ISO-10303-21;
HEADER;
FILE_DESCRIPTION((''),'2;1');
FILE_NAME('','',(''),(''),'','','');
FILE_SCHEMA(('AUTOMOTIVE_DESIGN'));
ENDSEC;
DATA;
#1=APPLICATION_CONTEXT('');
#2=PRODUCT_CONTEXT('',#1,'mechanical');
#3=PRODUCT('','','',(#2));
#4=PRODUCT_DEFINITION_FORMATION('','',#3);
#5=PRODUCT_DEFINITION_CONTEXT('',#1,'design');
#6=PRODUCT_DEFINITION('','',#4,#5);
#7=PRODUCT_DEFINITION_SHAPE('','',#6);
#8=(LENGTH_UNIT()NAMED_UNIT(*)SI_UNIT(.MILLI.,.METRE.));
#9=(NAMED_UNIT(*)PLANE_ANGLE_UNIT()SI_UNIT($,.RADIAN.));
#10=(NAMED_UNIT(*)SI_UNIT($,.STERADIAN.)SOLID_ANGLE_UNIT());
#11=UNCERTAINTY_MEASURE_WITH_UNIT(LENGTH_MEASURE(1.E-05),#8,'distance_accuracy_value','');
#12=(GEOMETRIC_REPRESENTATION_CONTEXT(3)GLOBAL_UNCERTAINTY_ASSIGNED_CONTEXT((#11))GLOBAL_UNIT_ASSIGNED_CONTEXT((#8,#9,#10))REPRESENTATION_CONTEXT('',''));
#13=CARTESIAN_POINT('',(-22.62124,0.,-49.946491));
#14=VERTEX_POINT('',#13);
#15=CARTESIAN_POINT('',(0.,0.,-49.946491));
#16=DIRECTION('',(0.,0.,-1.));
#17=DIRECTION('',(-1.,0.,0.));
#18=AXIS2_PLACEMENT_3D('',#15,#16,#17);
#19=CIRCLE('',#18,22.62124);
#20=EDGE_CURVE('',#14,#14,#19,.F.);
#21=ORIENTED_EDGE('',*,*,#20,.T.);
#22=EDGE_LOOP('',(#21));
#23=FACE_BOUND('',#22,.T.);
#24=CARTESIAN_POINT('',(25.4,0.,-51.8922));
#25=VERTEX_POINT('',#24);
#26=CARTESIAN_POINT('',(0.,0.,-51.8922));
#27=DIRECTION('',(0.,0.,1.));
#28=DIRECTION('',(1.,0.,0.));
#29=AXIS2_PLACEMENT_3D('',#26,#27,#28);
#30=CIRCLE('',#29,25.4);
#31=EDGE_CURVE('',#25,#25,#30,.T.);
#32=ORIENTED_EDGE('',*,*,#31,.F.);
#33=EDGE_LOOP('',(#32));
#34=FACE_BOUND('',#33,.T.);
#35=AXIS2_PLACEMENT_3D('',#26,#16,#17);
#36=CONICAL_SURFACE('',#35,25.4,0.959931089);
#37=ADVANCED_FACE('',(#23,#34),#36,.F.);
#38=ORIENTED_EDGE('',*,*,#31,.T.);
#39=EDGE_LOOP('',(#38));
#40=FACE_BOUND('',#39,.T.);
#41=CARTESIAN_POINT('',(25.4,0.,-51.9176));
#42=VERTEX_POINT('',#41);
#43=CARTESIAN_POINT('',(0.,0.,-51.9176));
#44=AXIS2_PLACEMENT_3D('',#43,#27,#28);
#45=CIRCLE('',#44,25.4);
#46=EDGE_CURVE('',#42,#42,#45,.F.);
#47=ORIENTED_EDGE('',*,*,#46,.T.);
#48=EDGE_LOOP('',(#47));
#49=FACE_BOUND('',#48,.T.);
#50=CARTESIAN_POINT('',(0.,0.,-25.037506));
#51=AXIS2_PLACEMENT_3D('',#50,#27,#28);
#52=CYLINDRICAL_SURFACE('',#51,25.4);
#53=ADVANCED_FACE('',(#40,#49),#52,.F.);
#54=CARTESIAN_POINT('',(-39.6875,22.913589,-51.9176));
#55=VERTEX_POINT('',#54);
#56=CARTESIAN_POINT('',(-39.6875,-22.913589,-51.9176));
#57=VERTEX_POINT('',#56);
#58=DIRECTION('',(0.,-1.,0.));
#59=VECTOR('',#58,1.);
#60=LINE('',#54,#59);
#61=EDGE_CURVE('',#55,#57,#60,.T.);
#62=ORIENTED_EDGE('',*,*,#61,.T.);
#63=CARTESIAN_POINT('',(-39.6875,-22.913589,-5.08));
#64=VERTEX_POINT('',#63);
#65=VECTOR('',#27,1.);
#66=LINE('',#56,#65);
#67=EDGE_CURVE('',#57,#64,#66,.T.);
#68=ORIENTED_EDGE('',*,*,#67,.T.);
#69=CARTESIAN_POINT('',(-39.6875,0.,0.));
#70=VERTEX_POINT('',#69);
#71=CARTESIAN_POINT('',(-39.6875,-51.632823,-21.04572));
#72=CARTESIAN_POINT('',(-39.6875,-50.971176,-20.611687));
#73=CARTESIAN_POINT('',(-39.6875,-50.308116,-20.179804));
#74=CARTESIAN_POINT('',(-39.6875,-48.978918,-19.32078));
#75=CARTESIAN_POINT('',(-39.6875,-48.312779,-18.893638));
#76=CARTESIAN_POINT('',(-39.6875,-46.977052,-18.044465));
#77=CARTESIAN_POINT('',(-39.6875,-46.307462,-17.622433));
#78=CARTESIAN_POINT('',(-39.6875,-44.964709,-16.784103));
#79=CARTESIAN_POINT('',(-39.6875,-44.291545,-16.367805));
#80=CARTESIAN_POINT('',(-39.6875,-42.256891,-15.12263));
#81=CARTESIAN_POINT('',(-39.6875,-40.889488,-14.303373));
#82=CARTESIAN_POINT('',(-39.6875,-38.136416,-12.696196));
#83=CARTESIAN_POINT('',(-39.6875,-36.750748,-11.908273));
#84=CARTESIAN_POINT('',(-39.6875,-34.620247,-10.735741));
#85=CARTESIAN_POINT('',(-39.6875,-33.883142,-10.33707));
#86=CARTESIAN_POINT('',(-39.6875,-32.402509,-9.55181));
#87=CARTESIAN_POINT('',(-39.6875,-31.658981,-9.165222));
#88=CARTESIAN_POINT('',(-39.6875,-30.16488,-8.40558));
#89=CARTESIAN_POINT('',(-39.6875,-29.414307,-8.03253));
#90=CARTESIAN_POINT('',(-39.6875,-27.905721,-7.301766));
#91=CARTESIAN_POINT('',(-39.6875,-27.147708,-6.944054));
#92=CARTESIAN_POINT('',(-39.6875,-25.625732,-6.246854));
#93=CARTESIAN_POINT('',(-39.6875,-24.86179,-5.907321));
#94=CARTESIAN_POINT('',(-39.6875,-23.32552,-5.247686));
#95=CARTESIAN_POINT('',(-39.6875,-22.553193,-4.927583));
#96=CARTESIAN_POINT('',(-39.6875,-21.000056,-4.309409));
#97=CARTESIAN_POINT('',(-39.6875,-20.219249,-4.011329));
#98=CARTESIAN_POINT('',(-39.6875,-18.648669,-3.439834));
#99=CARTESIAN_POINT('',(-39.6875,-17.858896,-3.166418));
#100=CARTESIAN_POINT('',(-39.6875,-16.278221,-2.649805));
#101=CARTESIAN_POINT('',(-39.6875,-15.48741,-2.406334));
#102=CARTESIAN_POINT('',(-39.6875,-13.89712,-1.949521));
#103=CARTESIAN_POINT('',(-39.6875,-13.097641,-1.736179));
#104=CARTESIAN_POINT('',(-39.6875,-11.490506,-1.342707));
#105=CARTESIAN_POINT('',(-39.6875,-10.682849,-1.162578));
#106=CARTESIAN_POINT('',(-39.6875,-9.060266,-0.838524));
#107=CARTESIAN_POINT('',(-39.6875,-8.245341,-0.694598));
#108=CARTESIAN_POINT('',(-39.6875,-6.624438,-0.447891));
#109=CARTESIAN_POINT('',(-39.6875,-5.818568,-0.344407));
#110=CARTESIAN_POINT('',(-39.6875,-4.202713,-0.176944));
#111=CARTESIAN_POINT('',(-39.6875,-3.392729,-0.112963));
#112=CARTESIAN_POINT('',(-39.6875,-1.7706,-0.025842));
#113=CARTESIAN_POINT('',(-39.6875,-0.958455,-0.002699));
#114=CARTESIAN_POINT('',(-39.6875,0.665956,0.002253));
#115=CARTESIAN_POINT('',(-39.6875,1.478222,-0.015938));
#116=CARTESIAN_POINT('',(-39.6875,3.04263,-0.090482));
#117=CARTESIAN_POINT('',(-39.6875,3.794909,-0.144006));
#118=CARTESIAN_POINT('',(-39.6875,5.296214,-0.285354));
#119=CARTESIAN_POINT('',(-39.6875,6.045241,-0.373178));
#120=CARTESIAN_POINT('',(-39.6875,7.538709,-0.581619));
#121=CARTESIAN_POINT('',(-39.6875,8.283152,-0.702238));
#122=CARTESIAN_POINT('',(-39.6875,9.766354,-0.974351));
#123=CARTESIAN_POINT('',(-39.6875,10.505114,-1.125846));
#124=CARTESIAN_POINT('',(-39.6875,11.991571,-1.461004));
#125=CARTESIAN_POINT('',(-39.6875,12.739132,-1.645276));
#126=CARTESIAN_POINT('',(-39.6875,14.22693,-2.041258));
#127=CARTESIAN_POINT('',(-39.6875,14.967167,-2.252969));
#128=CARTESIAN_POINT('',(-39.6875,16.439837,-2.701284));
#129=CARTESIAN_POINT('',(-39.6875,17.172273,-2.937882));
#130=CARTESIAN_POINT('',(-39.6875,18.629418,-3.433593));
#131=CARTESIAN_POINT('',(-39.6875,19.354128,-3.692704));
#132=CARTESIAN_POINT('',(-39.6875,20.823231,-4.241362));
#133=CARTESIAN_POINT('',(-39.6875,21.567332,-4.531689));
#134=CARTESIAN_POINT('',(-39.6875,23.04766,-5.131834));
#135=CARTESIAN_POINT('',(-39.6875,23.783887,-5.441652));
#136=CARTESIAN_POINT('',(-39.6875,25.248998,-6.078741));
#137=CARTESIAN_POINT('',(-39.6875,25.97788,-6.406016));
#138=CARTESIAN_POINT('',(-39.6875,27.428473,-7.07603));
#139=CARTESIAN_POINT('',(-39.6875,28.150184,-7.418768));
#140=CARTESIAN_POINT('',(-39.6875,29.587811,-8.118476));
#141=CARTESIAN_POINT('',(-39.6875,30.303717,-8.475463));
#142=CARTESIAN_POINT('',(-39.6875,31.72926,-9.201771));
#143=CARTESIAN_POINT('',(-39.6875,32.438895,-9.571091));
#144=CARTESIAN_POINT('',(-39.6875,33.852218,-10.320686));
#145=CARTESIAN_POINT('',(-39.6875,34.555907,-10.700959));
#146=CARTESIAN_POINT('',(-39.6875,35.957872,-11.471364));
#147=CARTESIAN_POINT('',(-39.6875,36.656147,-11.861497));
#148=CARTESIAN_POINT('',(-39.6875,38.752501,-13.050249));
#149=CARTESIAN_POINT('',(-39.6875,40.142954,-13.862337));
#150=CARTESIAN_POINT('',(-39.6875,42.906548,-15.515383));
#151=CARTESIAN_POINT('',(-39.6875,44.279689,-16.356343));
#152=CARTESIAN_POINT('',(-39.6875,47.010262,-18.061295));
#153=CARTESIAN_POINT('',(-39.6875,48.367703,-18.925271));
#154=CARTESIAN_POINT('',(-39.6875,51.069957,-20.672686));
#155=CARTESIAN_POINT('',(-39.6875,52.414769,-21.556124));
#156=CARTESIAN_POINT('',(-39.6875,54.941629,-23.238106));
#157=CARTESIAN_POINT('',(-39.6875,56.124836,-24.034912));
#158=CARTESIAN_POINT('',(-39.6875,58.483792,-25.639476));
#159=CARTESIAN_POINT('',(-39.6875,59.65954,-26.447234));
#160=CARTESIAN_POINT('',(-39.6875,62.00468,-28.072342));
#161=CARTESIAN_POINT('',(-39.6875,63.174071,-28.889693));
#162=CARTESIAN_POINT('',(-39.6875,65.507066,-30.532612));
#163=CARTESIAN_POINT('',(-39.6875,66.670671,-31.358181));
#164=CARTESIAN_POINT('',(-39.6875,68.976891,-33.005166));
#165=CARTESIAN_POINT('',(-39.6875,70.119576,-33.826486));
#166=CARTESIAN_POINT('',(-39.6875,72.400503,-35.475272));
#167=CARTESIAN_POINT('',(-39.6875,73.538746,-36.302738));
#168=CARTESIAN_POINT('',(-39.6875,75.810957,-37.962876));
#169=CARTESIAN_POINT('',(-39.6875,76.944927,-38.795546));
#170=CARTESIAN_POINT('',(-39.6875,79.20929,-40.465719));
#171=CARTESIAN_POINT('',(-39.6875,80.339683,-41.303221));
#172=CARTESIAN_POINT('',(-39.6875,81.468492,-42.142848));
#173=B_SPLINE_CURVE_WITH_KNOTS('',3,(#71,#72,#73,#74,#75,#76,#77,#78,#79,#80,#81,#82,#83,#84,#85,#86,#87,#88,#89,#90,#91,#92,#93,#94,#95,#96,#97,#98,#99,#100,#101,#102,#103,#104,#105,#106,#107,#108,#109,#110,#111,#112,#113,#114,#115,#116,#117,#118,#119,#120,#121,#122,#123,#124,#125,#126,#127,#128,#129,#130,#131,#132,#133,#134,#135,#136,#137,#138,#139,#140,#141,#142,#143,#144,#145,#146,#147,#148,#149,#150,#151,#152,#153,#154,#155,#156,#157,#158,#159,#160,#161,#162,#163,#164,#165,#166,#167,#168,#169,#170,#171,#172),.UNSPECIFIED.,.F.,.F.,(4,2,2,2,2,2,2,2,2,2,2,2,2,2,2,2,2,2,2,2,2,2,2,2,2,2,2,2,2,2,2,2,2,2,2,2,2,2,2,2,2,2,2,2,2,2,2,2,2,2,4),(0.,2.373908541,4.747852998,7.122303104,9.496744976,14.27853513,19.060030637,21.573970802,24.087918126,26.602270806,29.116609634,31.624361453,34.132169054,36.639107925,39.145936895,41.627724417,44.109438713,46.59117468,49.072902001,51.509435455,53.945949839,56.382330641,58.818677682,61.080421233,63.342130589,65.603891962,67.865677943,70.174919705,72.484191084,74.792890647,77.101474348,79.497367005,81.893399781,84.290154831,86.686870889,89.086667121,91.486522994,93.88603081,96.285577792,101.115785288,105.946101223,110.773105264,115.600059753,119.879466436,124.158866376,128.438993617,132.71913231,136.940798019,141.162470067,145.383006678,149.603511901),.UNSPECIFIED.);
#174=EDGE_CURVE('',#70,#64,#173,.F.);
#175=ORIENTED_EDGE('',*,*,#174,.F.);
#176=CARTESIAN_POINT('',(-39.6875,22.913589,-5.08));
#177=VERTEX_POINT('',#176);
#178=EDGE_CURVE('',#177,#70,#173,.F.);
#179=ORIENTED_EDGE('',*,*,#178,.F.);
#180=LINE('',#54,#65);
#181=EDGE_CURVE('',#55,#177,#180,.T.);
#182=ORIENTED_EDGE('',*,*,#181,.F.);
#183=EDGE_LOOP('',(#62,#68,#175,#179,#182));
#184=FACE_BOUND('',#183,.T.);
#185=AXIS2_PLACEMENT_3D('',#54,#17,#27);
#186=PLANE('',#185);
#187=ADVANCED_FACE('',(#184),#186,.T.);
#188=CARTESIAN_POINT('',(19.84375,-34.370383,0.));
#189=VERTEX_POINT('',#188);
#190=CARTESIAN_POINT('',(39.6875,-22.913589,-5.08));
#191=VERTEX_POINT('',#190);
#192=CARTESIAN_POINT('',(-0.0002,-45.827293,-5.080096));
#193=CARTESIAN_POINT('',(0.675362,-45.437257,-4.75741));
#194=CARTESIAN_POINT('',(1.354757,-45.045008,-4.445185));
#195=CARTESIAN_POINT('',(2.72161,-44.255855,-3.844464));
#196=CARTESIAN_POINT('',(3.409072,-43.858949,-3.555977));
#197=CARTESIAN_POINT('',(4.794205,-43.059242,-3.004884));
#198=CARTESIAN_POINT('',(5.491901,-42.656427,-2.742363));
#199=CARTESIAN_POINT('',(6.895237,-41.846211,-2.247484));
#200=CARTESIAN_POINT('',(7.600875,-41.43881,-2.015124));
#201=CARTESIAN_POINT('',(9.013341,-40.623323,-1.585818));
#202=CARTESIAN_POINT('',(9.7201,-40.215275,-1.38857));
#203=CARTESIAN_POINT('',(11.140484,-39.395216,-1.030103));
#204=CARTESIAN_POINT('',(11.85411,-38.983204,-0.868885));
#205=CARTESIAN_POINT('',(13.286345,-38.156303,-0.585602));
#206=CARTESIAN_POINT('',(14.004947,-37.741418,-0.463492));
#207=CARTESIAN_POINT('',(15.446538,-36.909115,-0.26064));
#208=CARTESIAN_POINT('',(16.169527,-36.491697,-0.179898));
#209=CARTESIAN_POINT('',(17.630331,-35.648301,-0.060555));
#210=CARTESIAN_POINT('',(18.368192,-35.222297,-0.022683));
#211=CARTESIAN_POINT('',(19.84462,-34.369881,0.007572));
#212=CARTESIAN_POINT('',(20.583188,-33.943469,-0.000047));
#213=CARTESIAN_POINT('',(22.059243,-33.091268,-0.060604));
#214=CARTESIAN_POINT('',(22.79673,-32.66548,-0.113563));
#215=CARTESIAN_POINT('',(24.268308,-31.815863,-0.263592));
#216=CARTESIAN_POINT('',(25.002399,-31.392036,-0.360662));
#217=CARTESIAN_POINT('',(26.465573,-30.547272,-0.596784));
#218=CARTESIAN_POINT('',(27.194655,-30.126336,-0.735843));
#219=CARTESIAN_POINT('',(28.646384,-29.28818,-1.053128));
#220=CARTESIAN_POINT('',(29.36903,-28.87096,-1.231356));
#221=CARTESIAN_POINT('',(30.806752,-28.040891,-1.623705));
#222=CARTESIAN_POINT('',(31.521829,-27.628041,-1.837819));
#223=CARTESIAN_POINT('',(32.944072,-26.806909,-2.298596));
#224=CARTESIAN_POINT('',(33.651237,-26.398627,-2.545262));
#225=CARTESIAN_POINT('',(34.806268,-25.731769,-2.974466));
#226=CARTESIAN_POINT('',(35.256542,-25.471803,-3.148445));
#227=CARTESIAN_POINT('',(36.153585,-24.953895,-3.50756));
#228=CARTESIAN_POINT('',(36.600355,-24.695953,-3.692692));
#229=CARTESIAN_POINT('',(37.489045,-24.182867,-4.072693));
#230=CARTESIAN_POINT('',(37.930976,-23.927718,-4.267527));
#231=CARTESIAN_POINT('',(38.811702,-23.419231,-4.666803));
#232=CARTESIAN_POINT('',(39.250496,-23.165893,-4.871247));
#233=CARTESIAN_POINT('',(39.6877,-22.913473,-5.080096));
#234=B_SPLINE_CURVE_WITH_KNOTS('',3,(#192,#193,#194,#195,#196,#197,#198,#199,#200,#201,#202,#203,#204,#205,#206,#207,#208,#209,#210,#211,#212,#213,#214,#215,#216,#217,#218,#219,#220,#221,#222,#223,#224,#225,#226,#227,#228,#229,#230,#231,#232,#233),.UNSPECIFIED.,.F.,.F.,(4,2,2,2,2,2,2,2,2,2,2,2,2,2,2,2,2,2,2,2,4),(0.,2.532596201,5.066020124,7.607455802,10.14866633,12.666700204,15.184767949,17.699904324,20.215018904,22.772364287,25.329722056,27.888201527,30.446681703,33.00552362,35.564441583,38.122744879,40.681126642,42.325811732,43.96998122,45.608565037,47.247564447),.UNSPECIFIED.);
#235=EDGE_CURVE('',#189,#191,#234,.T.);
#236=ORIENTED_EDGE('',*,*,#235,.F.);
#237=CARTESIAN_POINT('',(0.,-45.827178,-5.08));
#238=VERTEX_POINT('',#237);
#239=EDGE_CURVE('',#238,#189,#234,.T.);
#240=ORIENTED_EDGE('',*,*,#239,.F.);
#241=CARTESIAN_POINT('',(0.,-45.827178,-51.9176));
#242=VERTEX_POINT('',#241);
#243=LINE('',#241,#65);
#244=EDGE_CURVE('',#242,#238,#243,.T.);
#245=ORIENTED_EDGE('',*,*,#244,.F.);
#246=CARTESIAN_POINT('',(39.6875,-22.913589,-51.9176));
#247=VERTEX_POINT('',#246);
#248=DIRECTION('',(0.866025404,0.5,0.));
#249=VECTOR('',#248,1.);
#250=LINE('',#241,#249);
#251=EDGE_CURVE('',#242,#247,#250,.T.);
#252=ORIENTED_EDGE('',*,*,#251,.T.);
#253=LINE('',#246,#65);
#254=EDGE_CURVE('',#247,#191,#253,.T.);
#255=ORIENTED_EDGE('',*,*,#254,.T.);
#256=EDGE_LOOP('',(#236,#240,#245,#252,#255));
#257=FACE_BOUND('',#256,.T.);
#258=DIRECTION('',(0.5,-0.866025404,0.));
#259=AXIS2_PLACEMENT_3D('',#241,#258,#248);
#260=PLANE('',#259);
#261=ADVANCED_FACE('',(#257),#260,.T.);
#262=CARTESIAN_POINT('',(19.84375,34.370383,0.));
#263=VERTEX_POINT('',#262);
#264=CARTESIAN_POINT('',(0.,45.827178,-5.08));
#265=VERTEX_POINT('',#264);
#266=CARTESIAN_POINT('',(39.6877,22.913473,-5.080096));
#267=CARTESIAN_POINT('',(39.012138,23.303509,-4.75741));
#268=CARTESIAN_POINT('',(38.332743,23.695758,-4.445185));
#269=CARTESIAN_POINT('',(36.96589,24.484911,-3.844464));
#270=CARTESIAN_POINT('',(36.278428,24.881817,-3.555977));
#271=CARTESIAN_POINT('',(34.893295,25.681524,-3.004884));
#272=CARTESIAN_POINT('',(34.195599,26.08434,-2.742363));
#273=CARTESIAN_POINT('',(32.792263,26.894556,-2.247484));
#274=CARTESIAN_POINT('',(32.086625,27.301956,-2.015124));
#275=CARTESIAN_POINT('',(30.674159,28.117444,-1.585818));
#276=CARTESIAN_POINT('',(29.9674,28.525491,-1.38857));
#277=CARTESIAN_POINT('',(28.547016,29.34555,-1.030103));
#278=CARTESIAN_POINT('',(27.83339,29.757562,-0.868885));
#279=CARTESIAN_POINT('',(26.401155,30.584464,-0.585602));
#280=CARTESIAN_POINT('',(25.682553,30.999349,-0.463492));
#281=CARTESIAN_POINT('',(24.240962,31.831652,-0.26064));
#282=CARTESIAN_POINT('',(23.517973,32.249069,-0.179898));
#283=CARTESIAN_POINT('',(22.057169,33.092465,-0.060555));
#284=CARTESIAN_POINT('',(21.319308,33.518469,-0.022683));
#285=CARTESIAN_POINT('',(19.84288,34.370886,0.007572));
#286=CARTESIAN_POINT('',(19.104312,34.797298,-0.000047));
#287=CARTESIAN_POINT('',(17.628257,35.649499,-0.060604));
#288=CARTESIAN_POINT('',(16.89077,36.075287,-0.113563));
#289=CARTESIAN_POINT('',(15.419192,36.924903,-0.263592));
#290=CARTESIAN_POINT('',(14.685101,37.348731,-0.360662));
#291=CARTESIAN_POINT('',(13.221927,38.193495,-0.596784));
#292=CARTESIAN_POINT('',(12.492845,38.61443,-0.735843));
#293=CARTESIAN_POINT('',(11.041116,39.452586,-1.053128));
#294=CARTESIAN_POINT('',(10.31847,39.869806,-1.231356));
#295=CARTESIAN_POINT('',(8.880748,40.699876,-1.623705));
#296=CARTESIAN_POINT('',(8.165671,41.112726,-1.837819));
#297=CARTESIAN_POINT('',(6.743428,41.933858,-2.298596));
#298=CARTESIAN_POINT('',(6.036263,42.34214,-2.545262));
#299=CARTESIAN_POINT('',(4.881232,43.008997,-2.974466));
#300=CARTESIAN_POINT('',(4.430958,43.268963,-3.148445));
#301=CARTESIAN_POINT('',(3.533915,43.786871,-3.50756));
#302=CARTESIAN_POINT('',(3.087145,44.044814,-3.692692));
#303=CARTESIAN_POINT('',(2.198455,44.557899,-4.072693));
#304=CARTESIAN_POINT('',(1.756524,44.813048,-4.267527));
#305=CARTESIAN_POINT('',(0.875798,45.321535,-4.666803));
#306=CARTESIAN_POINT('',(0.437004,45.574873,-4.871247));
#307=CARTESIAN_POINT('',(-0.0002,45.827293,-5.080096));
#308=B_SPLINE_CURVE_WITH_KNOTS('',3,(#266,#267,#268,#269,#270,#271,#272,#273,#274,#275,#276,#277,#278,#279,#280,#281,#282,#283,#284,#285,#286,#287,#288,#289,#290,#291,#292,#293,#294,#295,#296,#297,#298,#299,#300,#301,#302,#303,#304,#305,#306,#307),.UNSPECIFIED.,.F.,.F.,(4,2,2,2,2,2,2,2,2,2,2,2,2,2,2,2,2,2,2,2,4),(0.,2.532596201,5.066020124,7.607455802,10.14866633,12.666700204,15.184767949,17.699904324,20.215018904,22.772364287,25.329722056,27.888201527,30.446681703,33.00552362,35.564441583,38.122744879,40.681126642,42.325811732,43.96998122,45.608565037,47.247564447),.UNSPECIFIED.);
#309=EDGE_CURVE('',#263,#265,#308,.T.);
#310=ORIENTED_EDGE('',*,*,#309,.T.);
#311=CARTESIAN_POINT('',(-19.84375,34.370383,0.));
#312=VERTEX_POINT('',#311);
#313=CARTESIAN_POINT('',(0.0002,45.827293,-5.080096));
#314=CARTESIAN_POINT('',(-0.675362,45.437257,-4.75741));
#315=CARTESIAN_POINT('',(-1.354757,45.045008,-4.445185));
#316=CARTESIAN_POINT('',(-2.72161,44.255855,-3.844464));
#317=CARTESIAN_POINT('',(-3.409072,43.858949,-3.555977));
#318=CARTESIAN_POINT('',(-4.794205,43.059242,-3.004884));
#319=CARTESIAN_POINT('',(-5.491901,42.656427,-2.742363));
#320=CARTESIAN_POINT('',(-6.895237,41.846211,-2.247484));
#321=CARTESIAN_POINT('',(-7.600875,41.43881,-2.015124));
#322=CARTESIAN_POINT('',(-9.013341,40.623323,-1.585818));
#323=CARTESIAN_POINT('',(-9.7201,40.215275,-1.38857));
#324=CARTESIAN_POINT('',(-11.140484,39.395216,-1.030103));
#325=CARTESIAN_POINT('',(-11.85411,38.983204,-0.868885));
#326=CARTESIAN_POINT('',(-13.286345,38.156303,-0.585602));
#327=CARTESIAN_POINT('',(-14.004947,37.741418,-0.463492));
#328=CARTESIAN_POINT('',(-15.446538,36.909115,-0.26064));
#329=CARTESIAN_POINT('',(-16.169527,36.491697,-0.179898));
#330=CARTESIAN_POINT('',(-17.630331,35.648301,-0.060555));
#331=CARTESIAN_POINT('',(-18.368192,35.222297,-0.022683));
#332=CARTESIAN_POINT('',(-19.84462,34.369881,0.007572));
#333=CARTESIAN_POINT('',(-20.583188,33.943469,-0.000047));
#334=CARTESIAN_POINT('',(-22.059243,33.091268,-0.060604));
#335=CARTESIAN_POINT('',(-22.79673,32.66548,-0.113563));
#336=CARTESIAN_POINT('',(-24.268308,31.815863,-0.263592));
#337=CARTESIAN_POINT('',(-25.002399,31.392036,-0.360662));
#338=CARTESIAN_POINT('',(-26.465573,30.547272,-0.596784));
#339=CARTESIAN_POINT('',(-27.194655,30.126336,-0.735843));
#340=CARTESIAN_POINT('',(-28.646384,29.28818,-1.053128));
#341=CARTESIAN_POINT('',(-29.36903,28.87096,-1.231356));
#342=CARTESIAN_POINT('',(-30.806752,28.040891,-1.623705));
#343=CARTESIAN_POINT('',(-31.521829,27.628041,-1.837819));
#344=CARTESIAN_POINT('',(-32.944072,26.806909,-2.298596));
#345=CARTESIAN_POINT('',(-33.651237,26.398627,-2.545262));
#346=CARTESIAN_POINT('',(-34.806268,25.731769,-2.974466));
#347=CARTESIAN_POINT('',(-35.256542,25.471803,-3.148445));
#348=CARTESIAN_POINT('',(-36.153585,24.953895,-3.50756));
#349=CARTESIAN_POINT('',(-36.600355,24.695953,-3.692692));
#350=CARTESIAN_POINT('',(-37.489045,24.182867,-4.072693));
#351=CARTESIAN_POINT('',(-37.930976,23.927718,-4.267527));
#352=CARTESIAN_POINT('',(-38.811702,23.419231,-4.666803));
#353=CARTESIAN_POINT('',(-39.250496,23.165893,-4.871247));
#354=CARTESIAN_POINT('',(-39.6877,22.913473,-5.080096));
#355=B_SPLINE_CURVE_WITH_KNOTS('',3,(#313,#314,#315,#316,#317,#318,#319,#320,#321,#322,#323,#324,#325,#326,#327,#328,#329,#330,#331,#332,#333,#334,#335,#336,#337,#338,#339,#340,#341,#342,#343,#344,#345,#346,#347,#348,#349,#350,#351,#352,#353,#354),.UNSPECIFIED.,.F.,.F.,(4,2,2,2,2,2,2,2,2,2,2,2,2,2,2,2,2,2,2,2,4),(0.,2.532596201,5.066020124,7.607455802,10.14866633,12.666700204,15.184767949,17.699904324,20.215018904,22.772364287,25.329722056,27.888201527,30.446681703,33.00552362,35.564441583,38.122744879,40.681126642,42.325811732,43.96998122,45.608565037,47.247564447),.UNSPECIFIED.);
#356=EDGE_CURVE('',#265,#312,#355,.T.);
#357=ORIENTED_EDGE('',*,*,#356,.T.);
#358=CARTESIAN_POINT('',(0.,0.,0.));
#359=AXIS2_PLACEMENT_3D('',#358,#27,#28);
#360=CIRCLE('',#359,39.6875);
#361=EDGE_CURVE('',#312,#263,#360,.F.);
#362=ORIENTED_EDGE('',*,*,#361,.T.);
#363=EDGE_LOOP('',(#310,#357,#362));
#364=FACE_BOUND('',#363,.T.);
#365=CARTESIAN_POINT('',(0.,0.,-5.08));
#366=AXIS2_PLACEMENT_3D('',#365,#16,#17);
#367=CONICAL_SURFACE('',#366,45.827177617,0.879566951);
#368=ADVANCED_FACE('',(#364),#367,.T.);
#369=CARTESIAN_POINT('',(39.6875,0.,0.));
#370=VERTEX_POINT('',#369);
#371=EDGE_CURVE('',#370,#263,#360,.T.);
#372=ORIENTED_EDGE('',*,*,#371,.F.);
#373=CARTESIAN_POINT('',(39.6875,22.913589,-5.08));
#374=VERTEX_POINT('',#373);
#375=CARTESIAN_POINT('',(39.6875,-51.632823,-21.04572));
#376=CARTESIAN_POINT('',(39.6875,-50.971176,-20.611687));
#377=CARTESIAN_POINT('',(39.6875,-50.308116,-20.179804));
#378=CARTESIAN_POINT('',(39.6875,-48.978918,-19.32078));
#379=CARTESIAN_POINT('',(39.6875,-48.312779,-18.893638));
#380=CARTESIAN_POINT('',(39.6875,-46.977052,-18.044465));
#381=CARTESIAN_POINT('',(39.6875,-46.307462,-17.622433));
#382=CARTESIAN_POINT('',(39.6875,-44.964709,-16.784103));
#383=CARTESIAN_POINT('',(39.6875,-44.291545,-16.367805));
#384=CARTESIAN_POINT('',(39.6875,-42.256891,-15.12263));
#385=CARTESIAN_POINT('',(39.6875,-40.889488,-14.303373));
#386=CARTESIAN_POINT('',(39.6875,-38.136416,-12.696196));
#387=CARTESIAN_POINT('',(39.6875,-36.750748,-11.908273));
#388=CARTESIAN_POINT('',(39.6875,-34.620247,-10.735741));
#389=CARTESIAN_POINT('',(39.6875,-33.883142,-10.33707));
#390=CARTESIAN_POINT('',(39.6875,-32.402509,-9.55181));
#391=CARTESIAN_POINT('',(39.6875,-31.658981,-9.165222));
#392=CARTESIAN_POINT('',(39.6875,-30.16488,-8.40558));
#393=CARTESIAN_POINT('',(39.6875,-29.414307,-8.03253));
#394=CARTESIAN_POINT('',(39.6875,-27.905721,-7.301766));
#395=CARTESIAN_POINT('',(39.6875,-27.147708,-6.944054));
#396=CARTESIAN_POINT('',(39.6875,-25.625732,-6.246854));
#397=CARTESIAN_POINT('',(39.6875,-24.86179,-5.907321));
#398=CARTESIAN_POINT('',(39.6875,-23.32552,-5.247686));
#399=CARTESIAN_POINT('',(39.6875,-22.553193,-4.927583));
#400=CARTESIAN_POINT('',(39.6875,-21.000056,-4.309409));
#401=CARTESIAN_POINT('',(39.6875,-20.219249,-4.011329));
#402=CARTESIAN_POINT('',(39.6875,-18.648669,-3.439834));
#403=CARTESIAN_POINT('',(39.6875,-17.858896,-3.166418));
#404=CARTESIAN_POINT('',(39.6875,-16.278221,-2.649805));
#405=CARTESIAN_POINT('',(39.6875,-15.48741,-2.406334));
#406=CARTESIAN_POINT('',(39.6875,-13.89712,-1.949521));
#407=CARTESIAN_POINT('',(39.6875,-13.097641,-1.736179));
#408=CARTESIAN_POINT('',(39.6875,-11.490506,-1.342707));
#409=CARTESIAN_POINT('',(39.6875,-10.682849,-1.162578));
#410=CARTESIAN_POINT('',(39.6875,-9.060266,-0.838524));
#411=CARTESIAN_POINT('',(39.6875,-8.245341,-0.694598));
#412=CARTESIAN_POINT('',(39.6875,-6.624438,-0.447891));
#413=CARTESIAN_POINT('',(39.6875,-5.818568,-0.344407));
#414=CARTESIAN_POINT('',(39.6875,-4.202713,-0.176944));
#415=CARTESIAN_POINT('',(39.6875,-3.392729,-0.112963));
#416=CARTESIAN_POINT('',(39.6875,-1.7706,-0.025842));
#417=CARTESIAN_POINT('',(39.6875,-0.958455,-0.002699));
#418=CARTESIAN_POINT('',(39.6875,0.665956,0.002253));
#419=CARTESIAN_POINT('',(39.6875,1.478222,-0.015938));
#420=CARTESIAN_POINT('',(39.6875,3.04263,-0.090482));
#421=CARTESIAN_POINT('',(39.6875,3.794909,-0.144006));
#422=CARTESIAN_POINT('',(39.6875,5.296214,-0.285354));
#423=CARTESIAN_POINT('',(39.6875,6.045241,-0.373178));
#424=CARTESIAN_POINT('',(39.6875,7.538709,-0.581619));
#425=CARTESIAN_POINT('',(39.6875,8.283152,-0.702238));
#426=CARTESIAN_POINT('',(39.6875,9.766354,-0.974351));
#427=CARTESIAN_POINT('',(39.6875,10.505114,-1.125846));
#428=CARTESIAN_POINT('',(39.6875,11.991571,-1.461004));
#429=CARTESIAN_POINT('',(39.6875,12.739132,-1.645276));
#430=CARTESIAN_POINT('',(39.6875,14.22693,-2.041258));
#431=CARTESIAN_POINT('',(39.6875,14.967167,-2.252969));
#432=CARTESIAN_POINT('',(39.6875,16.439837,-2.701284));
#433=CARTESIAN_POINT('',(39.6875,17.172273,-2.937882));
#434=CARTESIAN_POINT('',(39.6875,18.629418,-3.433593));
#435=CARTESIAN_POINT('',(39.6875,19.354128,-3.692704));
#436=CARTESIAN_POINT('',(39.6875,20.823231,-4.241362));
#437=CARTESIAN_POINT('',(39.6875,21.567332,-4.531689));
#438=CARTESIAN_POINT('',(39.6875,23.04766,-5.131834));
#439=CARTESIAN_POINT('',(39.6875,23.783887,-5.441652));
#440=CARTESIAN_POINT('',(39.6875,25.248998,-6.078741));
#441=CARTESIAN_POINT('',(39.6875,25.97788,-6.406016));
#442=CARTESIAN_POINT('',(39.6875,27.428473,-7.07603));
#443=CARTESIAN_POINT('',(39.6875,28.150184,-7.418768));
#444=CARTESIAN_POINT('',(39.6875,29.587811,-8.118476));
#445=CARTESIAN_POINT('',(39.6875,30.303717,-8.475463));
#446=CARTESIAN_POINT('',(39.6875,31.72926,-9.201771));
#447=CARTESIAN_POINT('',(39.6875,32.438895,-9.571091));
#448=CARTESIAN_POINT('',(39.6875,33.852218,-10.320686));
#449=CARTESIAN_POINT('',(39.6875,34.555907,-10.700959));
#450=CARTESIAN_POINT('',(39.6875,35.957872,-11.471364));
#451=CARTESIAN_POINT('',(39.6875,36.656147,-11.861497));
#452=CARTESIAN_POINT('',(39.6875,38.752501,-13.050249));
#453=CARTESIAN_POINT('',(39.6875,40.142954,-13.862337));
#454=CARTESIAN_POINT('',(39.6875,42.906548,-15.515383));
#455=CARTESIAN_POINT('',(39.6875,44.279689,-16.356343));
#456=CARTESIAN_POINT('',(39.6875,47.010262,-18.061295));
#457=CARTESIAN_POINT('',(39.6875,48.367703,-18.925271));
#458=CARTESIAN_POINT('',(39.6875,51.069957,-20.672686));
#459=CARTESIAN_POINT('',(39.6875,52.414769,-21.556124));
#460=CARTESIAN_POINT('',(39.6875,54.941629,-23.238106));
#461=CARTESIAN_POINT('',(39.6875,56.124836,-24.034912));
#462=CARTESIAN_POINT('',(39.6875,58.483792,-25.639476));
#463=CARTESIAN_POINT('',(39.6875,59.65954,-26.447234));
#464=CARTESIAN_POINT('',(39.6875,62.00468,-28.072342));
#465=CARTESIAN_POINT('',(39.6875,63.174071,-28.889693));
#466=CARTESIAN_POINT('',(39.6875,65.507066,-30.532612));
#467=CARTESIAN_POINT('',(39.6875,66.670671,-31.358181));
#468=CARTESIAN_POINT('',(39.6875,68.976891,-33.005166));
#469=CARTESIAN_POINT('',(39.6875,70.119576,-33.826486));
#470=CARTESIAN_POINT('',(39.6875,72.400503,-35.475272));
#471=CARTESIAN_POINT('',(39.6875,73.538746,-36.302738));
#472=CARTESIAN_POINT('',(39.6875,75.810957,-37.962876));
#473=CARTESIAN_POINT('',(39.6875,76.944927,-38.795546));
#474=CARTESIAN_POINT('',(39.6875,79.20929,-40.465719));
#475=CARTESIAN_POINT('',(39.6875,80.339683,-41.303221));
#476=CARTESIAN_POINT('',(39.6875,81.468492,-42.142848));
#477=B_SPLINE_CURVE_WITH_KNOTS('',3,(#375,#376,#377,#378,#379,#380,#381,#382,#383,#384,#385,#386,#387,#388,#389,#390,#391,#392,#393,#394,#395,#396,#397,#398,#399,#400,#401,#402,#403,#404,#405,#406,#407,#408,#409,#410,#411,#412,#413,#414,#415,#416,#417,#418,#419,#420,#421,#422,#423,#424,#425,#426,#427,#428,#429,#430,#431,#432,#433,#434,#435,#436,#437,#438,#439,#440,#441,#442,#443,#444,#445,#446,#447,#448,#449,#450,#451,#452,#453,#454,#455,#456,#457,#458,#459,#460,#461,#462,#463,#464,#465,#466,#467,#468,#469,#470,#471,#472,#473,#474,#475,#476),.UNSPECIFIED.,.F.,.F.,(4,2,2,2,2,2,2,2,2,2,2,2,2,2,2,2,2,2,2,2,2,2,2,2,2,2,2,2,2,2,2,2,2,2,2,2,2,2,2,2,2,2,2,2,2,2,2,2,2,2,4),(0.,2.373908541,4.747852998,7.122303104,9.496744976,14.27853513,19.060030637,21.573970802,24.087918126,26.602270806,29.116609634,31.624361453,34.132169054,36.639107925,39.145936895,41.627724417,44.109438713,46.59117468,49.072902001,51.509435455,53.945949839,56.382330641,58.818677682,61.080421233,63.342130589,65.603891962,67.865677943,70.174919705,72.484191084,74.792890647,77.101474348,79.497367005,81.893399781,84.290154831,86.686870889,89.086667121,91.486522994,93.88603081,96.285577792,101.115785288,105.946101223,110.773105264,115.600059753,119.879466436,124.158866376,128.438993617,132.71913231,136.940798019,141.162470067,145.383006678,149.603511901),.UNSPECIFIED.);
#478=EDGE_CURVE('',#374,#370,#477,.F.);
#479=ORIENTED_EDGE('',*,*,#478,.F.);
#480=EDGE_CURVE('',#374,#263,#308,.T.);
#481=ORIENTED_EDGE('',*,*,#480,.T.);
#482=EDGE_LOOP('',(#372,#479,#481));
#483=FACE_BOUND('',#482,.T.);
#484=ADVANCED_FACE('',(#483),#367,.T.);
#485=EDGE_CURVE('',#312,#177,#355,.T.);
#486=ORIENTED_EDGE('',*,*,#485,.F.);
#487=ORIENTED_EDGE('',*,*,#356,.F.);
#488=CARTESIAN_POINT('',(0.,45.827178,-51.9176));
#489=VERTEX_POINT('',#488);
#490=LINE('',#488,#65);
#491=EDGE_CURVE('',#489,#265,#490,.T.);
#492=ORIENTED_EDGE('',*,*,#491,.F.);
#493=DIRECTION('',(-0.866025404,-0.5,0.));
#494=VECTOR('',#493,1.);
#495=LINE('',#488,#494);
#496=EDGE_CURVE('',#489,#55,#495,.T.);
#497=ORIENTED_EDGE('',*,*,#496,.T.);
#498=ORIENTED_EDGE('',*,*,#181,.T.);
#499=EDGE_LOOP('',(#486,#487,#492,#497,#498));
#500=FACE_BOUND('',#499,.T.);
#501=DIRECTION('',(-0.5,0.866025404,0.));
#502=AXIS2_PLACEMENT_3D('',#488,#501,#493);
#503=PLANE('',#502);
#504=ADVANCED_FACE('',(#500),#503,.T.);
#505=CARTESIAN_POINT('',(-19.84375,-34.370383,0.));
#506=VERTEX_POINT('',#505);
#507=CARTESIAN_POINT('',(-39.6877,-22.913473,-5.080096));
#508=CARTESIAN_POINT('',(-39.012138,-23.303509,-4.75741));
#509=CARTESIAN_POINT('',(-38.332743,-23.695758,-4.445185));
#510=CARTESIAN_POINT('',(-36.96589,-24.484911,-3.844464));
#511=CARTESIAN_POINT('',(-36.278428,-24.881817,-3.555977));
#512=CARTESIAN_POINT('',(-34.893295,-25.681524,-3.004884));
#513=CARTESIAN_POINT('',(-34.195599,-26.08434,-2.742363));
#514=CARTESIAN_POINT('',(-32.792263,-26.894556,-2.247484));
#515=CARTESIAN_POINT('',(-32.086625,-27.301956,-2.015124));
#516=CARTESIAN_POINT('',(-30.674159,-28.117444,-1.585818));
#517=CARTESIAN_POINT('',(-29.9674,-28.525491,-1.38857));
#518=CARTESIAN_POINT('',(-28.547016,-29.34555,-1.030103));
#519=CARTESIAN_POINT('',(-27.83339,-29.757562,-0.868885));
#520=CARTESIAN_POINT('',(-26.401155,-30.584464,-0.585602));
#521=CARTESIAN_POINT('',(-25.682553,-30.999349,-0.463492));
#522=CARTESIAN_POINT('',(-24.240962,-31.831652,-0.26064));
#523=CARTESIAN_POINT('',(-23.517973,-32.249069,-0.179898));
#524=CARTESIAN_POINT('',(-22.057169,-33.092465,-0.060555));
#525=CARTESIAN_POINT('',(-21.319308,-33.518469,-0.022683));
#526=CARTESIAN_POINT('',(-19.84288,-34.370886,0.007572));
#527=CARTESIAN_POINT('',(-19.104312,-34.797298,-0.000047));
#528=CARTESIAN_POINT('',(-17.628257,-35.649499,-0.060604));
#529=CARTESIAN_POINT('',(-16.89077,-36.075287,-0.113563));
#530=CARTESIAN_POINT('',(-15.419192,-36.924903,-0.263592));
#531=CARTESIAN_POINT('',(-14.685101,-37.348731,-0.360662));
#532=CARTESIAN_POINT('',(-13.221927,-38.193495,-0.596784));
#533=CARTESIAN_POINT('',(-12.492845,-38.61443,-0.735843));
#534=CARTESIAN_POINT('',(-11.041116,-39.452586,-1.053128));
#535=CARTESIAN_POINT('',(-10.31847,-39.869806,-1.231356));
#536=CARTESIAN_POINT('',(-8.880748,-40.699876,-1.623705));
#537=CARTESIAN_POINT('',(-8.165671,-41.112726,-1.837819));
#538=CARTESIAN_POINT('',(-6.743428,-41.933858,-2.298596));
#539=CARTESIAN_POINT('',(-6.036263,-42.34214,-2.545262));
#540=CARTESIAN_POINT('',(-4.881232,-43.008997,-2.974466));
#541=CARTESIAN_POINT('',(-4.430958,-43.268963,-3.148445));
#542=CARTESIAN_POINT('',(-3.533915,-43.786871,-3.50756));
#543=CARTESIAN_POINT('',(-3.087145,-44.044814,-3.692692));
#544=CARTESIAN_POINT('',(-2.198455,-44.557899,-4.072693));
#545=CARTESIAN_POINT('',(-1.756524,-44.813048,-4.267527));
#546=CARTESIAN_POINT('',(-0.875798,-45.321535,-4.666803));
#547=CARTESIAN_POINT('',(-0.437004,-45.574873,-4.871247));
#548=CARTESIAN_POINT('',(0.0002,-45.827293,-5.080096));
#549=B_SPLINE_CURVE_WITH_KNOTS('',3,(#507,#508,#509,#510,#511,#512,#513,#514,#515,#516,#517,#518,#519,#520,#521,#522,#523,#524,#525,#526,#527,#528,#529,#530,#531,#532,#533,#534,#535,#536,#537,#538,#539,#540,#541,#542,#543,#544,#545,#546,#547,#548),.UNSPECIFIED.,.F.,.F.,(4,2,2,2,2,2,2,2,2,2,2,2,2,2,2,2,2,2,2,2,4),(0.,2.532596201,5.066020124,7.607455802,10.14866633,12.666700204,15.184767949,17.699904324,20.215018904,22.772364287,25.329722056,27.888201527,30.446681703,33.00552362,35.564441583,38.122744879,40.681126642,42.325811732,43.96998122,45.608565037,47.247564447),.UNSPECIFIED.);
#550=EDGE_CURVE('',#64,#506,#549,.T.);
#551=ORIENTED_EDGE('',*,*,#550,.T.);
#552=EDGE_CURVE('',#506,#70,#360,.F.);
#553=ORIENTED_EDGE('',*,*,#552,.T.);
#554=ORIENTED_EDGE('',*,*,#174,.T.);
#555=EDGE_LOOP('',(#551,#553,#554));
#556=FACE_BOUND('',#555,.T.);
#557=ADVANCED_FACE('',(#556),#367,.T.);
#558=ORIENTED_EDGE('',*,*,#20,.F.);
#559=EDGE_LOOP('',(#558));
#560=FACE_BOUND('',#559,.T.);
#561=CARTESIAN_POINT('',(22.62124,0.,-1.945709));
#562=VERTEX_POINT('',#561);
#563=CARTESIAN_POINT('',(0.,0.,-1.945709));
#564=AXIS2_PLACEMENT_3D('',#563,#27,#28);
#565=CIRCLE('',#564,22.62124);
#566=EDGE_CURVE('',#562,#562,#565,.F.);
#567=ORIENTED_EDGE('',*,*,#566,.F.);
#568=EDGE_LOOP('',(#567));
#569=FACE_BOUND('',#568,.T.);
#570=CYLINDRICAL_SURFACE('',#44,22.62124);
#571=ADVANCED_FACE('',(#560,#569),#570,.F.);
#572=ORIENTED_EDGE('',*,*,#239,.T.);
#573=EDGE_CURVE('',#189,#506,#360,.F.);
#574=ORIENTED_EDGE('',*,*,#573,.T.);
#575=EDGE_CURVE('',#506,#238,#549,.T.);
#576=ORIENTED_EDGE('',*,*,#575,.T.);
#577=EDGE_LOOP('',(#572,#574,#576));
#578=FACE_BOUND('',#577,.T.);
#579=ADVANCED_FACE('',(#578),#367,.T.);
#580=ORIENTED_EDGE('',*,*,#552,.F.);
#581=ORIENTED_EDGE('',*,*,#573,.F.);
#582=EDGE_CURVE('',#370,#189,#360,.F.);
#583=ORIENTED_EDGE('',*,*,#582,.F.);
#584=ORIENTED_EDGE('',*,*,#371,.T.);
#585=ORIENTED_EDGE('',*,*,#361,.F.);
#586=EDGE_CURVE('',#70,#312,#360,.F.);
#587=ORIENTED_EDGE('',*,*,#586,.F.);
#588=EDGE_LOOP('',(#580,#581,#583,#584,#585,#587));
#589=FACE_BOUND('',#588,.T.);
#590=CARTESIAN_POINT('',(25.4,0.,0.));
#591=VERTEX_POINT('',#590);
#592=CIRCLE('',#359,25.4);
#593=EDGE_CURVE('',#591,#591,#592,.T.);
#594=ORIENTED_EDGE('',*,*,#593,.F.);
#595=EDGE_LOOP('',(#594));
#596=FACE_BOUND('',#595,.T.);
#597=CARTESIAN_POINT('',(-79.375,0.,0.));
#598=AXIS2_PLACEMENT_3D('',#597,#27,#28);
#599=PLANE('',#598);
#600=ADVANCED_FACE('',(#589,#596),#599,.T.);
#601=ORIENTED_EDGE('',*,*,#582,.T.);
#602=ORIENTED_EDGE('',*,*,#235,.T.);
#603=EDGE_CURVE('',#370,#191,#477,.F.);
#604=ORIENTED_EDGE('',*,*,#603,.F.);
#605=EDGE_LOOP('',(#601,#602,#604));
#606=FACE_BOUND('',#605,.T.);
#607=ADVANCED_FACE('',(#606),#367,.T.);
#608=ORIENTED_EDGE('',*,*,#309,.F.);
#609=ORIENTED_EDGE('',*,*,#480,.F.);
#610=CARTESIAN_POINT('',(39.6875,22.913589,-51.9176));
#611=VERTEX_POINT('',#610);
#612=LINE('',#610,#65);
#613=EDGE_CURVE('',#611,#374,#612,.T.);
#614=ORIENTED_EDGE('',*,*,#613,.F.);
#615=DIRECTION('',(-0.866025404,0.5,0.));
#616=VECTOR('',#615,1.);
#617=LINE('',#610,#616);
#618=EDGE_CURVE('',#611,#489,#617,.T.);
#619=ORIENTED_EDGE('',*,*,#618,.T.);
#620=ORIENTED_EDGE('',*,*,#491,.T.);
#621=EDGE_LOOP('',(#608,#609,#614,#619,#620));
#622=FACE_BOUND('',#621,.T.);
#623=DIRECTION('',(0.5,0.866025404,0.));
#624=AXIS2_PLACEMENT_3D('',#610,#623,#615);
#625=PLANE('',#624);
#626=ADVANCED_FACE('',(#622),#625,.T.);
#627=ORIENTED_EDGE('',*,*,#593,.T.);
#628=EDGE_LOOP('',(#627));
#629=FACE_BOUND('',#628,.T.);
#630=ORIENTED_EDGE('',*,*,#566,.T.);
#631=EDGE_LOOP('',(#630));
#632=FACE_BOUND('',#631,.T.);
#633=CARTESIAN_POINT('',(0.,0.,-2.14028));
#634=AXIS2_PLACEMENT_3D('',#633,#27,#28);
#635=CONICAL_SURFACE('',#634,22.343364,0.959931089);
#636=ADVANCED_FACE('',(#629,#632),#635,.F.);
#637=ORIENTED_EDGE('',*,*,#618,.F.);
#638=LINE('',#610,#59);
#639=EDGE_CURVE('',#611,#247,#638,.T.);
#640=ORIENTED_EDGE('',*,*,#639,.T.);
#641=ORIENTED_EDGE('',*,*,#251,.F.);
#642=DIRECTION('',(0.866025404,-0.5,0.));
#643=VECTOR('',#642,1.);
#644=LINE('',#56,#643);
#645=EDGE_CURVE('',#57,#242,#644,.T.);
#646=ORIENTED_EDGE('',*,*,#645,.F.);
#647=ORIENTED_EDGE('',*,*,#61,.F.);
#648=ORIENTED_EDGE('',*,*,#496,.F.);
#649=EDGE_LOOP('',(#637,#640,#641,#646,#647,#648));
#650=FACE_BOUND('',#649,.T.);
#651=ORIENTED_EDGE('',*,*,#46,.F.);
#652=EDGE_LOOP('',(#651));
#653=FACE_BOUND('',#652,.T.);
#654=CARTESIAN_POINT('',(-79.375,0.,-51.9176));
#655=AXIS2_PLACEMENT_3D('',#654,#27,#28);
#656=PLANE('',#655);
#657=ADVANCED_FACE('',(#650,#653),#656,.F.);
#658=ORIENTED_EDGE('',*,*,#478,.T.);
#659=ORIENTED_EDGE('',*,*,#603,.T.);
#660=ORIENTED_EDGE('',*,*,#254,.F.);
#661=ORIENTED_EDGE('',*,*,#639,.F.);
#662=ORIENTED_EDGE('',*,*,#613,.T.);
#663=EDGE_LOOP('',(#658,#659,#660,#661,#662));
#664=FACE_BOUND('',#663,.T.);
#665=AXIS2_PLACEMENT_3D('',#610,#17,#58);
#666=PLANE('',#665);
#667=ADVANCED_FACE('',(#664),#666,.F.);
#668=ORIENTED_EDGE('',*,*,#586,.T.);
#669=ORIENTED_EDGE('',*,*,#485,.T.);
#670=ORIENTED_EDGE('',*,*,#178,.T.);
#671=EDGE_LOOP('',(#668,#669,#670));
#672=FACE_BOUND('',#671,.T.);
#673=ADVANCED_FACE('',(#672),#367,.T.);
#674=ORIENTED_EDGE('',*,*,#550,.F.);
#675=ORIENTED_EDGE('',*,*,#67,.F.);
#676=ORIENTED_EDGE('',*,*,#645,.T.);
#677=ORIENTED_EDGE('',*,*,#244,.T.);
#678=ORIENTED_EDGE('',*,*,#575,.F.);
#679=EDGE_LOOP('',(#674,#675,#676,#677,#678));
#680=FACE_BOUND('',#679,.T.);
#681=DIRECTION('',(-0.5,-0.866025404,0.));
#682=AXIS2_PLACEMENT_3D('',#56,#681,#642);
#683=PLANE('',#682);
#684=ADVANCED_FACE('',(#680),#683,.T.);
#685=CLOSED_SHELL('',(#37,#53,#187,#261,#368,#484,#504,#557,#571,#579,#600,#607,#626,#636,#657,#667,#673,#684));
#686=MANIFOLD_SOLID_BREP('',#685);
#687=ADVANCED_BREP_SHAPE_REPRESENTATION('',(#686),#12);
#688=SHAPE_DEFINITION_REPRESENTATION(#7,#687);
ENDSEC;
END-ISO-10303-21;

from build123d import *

# Parameters (mm, degrees)
THREADSCHEMATIC_START     = -51.9176
THREADSCHEMATIC_OUTLINE_R = 22.62124
THREADSCHEMATIC_DEPTH     = 51.9176


# Read off the part's stored shape, not the designer's step: ThreadSchematic
with BuildPart() as part:
    # ThreadSchematic outline → ThreadSchematic (new body)
    with BuildSketch(Plane.XY.offset(THREADSCHEMATIC_START)):
        Polygon((39.6875, 22.913588808), (0, 45.827177617), (-39.6875, 22.913588808), (-39.6875, -22.913588808), (0, -45.827177617), (39.6875, -22.913588808), align=None)
        Circle(THREADSCHEMATIC_OUTLINE_R, mode=Mode.SUBTRACT)
    extrude(amount=THREADSCHEMATIC_DEPTH)

    # Sketch2 → Single-Chamfer (revolve, cut)
    with BuildSketch(Plane(origin=(0, 0, 0), x_dir=(0, 0, -1), z_dir=(1, 0, 0))):
        Polygon((0, 39.6875), (-12.7, 39.6875), (-12.7, 58.527177617), (5.08, 58.527177617), (5.08, 45.827177617), align=None)
    revolve(axis=Axis((0, 0, 0), (0, 0, -1)), mode=Mode.SUBTRACT)

    # Sketch3 → EndChamfer (revolve, cut)
    with BuildSketch(Plane(origin=(0, 0, 0), x_dir=(0, 0, -1), z_dir=(1, 0, 0)), mode=Mode.PRIVATE) as endchamfer_sk:
        Polygon((51.8922, 25.4), (49.751920431, 22.343364), (51.943, 22.343364), (51.943, 25.4), align=None)
        Polygon((-0.0508, 25.4), (0, 25.4), (2.140279569, 22.343364), (-0.0508, 22.343364), align=None)
    revolve(endchamfer_sk.sketch.rotate(Axis((0, 0, -25.037505729), (0, 0, -1)), 90), axis=Axis((0, 0, -25.037505729), (0, 0, -1)), mode=Mode.SUBTRACT)


solid = part.part
